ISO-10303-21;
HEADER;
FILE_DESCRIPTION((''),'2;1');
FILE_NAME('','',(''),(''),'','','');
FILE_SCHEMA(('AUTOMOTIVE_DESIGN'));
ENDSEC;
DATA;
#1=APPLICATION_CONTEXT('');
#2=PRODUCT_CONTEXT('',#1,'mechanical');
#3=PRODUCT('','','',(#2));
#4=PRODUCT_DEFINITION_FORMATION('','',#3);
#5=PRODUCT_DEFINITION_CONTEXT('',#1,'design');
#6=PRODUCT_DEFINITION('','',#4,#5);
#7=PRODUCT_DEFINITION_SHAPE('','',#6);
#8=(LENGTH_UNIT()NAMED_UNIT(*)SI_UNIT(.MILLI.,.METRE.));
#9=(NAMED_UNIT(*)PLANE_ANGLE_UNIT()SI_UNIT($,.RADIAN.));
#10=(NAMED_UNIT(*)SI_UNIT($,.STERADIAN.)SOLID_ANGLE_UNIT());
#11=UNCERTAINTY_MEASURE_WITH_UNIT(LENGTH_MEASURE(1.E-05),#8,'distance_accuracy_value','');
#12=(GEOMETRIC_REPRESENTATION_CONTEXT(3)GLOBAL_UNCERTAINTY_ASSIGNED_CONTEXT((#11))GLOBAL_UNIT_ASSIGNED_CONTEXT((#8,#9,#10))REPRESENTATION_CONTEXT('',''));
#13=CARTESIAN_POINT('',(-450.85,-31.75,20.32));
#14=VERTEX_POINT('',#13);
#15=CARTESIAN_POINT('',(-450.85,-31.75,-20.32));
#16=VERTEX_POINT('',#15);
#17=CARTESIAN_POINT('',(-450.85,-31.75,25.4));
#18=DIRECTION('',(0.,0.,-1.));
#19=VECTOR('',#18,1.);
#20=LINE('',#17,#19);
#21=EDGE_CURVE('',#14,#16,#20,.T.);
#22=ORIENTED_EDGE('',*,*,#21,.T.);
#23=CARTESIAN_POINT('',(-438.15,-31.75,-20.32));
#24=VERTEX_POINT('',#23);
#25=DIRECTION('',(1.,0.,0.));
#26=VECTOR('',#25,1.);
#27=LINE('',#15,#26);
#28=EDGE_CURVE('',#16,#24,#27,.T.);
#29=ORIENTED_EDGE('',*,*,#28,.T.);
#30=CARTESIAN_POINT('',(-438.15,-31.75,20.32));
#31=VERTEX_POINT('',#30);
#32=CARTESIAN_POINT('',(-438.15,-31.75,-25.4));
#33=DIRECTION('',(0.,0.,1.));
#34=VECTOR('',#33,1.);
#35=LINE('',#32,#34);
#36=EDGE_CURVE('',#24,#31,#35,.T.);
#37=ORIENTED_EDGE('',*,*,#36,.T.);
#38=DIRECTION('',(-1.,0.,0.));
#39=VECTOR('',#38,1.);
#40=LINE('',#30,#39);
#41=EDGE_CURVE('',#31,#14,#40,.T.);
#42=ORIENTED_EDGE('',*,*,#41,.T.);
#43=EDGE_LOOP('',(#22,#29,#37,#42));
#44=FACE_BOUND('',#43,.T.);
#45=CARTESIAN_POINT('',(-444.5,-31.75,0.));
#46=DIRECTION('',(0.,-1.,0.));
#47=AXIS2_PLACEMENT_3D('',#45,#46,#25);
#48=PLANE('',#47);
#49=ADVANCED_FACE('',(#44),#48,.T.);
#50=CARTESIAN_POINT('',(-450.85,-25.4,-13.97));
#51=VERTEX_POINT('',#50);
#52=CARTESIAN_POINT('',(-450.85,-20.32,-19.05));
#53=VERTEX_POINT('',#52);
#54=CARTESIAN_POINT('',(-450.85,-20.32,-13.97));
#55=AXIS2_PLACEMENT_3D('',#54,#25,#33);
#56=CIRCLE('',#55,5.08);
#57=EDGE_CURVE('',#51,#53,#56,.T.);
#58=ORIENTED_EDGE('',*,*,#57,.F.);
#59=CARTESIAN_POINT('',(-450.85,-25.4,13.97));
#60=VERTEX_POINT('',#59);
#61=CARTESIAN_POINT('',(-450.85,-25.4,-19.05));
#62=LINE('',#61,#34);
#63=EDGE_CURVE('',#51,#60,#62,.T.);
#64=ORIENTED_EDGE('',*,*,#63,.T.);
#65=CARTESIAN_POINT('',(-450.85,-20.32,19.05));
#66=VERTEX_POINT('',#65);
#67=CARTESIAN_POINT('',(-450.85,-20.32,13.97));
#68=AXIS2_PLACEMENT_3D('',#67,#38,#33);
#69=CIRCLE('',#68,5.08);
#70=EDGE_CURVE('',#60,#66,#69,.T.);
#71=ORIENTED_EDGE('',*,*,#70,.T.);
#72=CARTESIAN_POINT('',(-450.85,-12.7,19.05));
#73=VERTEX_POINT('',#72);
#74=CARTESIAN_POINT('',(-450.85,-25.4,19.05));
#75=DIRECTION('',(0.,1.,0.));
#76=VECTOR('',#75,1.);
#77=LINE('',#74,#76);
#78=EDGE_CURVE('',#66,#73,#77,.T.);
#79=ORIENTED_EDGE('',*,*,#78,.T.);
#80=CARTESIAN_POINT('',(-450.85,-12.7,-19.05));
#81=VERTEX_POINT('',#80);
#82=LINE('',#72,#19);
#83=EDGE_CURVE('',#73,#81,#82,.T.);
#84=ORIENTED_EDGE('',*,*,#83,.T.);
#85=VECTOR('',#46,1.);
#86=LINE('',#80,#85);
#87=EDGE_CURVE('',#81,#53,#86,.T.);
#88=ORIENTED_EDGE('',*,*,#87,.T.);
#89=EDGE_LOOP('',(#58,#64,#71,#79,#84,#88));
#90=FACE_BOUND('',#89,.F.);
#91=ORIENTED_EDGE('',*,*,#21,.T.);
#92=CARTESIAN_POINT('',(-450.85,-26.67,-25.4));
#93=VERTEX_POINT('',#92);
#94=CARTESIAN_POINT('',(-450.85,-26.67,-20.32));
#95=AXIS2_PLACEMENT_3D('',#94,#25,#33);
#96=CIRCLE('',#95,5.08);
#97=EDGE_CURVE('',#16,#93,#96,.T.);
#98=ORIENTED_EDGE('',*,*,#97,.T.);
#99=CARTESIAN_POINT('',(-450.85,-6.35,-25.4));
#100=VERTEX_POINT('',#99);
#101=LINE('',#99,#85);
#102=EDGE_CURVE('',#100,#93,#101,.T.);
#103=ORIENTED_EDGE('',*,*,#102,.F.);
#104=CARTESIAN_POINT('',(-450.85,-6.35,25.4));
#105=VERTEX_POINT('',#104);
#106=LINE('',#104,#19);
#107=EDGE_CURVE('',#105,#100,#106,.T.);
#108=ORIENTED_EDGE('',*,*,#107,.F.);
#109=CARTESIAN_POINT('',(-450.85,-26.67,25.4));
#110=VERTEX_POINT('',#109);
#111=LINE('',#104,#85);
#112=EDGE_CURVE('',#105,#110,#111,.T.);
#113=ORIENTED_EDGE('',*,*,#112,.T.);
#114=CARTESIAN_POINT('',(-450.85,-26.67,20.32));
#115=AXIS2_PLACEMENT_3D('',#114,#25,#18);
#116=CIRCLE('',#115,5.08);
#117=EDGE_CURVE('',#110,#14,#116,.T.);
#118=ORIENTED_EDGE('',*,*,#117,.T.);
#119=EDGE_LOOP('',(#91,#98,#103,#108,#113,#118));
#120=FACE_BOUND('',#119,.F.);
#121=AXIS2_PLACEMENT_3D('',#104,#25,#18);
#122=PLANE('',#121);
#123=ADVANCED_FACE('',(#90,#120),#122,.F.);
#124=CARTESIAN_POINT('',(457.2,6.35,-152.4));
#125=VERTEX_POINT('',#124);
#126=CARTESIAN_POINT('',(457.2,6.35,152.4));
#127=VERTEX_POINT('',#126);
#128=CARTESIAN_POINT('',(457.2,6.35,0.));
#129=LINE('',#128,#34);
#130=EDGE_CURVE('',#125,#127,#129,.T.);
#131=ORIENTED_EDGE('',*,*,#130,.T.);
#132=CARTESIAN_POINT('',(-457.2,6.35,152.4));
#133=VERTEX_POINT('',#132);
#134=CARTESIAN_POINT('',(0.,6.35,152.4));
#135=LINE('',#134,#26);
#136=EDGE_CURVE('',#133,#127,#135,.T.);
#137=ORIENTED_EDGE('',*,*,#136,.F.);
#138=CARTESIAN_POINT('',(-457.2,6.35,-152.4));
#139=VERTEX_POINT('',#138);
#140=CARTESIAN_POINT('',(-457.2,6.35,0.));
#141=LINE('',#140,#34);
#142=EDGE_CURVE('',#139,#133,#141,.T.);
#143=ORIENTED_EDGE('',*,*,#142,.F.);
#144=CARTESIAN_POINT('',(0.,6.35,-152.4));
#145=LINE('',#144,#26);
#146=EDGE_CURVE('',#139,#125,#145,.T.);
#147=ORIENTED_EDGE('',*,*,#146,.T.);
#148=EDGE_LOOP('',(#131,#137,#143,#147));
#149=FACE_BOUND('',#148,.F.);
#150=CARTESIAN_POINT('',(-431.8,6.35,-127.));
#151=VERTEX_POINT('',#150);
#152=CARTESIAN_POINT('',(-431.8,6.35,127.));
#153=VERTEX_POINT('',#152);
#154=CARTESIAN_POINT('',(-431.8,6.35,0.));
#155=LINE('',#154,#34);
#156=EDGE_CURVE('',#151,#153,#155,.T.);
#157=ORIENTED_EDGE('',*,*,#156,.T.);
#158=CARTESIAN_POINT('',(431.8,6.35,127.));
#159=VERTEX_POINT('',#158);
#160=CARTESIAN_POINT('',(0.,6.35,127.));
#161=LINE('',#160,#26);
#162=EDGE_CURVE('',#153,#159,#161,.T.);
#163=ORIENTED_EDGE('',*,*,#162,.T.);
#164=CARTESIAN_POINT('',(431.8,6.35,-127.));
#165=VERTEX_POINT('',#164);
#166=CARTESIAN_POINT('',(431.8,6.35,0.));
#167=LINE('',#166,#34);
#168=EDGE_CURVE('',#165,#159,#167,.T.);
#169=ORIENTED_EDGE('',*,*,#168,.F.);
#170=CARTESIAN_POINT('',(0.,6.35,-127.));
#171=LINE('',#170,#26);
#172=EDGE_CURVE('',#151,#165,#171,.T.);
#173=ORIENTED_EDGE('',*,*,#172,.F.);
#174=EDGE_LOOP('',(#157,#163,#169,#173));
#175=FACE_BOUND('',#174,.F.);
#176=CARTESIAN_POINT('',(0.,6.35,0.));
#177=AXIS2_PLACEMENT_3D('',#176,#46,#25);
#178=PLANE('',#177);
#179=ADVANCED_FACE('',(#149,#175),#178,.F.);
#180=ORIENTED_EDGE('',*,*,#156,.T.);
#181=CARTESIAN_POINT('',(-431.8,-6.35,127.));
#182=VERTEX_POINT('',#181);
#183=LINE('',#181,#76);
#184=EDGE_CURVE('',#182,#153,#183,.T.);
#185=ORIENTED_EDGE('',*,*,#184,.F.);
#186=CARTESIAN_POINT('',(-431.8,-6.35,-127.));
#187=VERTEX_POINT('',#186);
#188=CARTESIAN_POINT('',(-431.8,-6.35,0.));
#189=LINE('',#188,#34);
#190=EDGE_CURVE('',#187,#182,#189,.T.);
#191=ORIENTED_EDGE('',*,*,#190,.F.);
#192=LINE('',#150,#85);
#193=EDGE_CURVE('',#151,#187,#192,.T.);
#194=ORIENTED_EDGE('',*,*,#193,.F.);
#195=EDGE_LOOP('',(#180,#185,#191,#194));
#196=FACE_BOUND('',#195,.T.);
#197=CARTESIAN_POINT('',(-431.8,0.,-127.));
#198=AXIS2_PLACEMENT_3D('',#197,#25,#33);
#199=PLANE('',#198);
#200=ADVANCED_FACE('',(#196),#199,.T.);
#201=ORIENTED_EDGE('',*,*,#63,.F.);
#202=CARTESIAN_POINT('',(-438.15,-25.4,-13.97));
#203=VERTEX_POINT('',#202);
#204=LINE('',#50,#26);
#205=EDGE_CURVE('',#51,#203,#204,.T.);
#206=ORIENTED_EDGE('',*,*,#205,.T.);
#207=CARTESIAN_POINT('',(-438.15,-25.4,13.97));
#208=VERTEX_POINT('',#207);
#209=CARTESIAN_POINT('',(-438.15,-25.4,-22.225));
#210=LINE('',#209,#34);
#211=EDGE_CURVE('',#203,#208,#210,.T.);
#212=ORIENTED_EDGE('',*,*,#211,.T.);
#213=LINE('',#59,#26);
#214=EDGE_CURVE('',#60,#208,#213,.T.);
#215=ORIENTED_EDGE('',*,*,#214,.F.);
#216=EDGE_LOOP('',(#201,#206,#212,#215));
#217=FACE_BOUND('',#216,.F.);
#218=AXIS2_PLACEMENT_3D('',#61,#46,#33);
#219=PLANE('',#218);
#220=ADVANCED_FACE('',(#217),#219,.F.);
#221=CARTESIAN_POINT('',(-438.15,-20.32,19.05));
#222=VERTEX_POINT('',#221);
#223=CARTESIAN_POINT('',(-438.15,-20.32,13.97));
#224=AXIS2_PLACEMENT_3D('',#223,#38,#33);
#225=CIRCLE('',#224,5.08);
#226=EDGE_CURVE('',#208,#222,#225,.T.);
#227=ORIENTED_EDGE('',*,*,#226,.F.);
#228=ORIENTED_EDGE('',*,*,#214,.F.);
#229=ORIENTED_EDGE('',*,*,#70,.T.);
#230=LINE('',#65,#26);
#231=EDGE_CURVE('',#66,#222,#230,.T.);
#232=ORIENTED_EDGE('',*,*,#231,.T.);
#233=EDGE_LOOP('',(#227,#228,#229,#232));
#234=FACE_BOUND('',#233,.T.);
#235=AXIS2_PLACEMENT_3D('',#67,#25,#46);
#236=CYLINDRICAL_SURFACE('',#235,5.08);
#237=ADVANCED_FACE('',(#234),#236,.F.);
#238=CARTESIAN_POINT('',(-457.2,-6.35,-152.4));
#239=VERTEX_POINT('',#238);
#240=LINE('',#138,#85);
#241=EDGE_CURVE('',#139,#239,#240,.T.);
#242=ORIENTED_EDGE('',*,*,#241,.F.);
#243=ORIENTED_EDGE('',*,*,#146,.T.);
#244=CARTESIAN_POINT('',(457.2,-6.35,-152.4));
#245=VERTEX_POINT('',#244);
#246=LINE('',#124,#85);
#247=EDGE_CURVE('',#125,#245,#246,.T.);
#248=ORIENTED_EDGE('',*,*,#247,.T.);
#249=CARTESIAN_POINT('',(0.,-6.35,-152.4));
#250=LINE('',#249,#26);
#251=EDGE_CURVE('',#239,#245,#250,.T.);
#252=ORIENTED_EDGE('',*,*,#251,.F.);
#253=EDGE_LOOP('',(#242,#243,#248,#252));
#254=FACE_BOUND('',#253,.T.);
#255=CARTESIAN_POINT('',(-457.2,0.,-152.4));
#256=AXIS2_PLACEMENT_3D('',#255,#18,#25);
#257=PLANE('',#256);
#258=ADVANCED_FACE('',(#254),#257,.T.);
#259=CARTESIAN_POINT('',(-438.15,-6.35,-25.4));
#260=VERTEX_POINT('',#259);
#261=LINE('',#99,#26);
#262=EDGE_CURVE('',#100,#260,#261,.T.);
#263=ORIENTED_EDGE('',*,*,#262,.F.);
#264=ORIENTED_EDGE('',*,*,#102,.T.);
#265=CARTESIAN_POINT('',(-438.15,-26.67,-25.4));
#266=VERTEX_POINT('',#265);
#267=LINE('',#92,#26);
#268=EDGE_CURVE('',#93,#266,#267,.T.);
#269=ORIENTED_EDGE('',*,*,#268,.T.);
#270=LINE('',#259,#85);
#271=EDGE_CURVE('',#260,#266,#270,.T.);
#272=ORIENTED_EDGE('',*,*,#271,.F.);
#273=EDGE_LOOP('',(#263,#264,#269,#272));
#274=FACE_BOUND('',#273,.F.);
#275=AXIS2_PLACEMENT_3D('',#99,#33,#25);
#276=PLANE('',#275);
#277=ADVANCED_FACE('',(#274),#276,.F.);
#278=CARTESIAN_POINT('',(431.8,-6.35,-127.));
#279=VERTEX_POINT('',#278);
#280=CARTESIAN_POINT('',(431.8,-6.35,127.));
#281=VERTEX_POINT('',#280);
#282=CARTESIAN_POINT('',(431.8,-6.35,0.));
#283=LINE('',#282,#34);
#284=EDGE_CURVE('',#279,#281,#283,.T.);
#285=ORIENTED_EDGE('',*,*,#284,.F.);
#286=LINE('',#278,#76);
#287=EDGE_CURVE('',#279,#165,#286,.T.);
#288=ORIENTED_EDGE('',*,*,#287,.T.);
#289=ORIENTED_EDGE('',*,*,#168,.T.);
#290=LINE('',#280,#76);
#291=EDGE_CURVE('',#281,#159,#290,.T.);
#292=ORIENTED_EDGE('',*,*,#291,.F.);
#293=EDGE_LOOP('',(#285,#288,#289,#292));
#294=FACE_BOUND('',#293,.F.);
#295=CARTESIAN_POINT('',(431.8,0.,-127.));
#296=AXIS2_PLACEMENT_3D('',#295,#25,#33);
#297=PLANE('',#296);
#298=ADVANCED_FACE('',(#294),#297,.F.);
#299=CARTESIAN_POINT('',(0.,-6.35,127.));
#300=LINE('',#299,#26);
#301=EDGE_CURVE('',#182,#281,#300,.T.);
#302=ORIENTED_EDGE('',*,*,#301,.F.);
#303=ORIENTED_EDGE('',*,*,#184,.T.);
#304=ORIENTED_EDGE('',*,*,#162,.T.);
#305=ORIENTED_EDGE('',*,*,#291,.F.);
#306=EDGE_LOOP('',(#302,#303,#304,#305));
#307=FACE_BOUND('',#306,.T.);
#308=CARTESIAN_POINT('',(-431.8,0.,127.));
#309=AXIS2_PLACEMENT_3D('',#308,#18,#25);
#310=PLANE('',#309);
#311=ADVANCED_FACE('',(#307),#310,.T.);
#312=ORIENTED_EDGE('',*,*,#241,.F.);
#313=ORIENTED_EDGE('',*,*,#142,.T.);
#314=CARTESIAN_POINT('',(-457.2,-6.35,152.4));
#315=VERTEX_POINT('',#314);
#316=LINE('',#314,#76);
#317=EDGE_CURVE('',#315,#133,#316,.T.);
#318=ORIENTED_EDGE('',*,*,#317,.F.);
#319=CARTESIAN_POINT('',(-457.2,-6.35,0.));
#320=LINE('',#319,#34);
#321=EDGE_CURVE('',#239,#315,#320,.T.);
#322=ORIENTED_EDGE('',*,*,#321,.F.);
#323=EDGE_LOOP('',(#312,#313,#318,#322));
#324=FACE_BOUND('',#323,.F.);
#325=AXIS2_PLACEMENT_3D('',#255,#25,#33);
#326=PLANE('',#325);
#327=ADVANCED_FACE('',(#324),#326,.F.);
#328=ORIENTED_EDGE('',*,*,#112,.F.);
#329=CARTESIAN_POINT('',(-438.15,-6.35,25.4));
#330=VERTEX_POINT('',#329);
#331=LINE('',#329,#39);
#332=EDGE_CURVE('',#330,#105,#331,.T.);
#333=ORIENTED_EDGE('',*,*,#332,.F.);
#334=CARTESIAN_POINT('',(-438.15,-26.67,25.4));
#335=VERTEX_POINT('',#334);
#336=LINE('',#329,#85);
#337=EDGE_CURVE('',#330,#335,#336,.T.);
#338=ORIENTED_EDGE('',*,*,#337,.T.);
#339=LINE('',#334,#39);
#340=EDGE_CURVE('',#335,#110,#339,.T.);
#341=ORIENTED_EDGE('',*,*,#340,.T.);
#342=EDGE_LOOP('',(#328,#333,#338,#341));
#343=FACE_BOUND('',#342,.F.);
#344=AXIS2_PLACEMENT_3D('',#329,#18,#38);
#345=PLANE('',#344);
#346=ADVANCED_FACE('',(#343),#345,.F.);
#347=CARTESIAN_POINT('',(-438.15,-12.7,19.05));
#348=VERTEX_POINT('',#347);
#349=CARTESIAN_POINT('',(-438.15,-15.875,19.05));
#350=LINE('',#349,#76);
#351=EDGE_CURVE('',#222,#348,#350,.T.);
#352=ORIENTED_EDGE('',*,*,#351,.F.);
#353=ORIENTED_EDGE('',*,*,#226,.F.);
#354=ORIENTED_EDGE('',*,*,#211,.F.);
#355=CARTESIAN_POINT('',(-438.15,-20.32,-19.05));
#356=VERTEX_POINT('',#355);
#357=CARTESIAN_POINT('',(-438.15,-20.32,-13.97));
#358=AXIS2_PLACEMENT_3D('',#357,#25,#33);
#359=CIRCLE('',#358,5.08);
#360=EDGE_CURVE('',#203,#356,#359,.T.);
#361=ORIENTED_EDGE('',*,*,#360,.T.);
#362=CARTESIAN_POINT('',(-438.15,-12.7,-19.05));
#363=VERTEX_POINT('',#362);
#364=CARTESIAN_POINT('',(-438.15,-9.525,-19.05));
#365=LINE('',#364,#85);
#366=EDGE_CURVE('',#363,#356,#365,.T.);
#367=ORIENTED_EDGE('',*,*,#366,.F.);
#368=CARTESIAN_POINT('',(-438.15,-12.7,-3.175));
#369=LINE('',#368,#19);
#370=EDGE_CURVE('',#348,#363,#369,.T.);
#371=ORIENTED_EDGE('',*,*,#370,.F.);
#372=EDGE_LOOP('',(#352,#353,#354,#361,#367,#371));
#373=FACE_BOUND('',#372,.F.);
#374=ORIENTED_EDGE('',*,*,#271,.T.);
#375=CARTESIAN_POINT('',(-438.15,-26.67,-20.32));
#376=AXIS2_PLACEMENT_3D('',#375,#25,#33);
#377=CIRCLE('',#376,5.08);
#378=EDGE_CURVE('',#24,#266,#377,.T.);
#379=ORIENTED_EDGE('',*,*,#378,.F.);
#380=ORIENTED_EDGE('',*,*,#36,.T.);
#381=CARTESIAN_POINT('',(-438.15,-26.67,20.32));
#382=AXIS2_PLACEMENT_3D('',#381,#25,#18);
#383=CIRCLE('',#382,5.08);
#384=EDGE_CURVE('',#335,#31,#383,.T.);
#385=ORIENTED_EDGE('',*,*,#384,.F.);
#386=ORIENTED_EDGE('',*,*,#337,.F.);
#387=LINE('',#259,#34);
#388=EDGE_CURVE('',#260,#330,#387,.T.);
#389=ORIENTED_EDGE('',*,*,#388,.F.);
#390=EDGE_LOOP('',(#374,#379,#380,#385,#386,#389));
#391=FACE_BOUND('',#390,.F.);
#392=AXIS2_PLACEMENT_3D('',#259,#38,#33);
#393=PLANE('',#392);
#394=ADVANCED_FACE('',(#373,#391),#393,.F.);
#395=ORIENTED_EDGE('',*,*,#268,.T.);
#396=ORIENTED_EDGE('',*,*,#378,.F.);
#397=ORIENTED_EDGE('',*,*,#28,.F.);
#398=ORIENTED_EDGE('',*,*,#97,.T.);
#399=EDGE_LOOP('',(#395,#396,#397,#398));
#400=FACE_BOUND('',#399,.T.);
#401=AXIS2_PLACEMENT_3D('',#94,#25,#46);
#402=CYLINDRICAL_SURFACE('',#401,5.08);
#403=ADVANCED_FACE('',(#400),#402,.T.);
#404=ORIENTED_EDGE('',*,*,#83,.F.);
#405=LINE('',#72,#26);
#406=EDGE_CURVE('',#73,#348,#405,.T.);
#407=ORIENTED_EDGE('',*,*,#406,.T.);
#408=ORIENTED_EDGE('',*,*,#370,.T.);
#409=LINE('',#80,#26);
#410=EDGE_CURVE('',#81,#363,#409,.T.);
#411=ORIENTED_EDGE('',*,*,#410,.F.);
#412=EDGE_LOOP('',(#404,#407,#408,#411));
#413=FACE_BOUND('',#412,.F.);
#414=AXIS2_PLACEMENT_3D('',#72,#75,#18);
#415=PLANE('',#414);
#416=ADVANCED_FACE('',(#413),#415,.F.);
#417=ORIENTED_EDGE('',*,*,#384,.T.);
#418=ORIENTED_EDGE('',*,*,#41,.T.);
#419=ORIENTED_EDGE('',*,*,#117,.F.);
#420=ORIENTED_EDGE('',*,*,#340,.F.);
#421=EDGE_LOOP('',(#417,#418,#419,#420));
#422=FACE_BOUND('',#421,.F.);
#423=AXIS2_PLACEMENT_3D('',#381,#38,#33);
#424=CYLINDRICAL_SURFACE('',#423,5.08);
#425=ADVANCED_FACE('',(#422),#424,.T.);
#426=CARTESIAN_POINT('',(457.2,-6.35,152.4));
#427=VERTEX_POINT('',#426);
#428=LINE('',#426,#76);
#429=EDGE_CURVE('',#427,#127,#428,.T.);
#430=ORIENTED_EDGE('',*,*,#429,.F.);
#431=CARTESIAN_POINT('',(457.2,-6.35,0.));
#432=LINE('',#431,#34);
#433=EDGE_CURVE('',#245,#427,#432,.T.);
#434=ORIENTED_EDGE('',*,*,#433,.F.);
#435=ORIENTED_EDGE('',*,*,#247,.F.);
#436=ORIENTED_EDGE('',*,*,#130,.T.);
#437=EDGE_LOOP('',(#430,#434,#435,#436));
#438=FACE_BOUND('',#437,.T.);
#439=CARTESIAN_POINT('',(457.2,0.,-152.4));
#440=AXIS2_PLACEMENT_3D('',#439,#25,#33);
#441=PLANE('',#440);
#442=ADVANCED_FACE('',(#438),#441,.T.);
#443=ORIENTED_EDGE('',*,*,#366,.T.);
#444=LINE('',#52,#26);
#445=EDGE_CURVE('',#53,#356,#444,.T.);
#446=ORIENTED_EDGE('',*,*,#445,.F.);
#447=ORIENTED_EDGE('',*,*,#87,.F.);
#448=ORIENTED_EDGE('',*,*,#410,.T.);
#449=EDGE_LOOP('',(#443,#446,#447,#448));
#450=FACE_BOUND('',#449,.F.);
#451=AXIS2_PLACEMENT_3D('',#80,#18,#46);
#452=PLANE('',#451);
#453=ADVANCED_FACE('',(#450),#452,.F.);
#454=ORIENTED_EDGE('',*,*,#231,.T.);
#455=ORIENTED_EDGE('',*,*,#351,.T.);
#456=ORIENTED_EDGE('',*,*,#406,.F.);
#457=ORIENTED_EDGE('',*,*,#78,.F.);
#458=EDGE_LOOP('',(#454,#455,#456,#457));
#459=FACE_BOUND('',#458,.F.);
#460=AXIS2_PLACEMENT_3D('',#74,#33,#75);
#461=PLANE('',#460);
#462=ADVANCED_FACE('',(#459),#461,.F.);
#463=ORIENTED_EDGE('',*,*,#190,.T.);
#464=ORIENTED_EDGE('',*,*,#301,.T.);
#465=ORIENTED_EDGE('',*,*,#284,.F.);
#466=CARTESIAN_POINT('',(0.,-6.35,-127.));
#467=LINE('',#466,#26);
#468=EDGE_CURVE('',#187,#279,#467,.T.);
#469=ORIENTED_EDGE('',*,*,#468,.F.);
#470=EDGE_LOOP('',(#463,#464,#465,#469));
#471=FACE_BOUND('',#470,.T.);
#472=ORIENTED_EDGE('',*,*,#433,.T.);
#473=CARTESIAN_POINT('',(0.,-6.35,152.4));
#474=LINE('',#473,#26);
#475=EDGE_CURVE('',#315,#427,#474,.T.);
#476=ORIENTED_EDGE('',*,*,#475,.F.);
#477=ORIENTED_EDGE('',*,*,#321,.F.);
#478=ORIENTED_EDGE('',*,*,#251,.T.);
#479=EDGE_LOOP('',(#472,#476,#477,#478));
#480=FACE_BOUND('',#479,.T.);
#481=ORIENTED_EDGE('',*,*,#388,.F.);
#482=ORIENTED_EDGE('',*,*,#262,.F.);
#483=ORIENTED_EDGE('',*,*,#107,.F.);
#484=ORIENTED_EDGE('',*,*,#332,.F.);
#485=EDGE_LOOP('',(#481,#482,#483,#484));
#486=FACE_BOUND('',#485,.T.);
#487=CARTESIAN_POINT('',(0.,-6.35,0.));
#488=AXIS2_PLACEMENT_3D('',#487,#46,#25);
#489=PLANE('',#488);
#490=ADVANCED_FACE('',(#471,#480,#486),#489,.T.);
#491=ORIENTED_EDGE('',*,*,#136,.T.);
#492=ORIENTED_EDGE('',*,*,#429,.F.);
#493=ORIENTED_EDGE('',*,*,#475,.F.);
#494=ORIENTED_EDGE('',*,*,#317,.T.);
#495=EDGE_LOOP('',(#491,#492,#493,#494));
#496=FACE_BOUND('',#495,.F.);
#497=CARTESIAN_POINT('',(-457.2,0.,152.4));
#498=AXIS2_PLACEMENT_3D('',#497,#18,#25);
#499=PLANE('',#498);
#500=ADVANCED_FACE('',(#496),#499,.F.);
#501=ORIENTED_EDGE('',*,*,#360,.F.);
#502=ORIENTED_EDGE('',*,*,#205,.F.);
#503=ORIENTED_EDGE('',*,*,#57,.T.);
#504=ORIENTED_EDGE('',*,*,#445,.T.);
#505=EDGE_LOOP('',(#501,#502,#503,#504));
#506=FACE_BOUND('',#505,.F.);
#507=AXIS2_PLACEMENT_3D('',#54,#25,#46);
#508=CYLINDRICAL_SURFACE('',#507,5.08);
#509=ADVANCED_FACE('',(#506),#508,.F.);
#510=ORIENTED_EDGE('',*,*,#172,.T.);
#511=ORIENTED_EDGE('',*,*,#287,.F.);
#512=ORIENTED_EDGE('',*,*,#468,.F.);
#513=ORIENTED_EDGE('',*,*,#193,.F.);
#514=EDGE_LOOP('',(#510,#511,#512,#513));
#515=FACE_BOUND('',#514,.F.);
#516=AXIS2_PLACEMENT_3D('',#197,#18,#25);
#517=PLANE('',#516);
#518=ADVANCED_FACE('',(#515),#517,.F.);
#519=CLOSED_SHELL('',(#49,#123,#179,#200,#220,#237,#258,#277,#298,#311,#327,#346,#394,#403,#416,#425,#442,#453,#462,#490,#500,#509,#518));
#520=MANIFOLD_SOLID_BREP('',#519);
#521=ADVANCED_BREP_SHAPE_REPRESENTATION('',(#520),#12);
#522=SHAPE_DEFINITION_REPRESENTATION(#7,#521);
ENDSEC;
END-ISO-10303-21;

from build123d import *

# Parameters (mm, degrees)
F0_W     = 914.4
F0_H     = 304.8
F0_W_2   = 863.6
F0_H_2   = 254
F1_DEPTH = 6.35
F3_DEPTH = 25.4
F5_DEPTH = 25.4
F6_R     = 5.08
F7_R     = 5.08


with BuildPart() as f1:
    # F0 (on Front) → F1 (new body, symmetric)
    with BuildSketch(Plane.XZ):
        Rectangle(F0_W, F0_H)
        Rectangle(F0_W_2, F0_H_2, mode=Mode.SUBTRACT)
    extrude(amount=F1_DEPTH, both=True)

    # F2 (on face) → F3 (join)
    with BuildSketch(Plane.XZ.offset(6.35)):
        Polygon((-438.15, 0), (-438.15, 25.4), (-450.85, 25.4), (-450.85, -25.4), (-438.15, -25.4), align=None)
    extrude(amount=F3_DEPTH)

    # F4 (on face) → F5 (cut)
    with BuildSketch(Plane(origin=(-450.85, 0, 0), x_dir=(0, -1, 0), z_dir=(-1, 0, 0))):
        Polygon((25.4, 0), (25.4, 19.05), (12.7, 19.05), (12.7, -19.05), (25.4, -19.05), align=None)
    extrude(amount=-F5_DEPTH, mode=Mode.SUBTRACT)

    # F6
    f6_edges = [f1.edges().sort_by_distance(p)[0] for p in [
        (-444.5, -25.4, 19.05),
        (-444.5, -25.4, -19.05),
    ]]
    fillet(f6_edges, radius=F6_R)

    # F7
    f7_edges = [f1.edges().sort_by_distance(p)[0] for p in [
        (-444.5, -31.75, 25.4),
        (-444.5, -31.75, -25.4),
    ]]
    fillet(f7_edges, radius=F7_R)


solid = f1.part
